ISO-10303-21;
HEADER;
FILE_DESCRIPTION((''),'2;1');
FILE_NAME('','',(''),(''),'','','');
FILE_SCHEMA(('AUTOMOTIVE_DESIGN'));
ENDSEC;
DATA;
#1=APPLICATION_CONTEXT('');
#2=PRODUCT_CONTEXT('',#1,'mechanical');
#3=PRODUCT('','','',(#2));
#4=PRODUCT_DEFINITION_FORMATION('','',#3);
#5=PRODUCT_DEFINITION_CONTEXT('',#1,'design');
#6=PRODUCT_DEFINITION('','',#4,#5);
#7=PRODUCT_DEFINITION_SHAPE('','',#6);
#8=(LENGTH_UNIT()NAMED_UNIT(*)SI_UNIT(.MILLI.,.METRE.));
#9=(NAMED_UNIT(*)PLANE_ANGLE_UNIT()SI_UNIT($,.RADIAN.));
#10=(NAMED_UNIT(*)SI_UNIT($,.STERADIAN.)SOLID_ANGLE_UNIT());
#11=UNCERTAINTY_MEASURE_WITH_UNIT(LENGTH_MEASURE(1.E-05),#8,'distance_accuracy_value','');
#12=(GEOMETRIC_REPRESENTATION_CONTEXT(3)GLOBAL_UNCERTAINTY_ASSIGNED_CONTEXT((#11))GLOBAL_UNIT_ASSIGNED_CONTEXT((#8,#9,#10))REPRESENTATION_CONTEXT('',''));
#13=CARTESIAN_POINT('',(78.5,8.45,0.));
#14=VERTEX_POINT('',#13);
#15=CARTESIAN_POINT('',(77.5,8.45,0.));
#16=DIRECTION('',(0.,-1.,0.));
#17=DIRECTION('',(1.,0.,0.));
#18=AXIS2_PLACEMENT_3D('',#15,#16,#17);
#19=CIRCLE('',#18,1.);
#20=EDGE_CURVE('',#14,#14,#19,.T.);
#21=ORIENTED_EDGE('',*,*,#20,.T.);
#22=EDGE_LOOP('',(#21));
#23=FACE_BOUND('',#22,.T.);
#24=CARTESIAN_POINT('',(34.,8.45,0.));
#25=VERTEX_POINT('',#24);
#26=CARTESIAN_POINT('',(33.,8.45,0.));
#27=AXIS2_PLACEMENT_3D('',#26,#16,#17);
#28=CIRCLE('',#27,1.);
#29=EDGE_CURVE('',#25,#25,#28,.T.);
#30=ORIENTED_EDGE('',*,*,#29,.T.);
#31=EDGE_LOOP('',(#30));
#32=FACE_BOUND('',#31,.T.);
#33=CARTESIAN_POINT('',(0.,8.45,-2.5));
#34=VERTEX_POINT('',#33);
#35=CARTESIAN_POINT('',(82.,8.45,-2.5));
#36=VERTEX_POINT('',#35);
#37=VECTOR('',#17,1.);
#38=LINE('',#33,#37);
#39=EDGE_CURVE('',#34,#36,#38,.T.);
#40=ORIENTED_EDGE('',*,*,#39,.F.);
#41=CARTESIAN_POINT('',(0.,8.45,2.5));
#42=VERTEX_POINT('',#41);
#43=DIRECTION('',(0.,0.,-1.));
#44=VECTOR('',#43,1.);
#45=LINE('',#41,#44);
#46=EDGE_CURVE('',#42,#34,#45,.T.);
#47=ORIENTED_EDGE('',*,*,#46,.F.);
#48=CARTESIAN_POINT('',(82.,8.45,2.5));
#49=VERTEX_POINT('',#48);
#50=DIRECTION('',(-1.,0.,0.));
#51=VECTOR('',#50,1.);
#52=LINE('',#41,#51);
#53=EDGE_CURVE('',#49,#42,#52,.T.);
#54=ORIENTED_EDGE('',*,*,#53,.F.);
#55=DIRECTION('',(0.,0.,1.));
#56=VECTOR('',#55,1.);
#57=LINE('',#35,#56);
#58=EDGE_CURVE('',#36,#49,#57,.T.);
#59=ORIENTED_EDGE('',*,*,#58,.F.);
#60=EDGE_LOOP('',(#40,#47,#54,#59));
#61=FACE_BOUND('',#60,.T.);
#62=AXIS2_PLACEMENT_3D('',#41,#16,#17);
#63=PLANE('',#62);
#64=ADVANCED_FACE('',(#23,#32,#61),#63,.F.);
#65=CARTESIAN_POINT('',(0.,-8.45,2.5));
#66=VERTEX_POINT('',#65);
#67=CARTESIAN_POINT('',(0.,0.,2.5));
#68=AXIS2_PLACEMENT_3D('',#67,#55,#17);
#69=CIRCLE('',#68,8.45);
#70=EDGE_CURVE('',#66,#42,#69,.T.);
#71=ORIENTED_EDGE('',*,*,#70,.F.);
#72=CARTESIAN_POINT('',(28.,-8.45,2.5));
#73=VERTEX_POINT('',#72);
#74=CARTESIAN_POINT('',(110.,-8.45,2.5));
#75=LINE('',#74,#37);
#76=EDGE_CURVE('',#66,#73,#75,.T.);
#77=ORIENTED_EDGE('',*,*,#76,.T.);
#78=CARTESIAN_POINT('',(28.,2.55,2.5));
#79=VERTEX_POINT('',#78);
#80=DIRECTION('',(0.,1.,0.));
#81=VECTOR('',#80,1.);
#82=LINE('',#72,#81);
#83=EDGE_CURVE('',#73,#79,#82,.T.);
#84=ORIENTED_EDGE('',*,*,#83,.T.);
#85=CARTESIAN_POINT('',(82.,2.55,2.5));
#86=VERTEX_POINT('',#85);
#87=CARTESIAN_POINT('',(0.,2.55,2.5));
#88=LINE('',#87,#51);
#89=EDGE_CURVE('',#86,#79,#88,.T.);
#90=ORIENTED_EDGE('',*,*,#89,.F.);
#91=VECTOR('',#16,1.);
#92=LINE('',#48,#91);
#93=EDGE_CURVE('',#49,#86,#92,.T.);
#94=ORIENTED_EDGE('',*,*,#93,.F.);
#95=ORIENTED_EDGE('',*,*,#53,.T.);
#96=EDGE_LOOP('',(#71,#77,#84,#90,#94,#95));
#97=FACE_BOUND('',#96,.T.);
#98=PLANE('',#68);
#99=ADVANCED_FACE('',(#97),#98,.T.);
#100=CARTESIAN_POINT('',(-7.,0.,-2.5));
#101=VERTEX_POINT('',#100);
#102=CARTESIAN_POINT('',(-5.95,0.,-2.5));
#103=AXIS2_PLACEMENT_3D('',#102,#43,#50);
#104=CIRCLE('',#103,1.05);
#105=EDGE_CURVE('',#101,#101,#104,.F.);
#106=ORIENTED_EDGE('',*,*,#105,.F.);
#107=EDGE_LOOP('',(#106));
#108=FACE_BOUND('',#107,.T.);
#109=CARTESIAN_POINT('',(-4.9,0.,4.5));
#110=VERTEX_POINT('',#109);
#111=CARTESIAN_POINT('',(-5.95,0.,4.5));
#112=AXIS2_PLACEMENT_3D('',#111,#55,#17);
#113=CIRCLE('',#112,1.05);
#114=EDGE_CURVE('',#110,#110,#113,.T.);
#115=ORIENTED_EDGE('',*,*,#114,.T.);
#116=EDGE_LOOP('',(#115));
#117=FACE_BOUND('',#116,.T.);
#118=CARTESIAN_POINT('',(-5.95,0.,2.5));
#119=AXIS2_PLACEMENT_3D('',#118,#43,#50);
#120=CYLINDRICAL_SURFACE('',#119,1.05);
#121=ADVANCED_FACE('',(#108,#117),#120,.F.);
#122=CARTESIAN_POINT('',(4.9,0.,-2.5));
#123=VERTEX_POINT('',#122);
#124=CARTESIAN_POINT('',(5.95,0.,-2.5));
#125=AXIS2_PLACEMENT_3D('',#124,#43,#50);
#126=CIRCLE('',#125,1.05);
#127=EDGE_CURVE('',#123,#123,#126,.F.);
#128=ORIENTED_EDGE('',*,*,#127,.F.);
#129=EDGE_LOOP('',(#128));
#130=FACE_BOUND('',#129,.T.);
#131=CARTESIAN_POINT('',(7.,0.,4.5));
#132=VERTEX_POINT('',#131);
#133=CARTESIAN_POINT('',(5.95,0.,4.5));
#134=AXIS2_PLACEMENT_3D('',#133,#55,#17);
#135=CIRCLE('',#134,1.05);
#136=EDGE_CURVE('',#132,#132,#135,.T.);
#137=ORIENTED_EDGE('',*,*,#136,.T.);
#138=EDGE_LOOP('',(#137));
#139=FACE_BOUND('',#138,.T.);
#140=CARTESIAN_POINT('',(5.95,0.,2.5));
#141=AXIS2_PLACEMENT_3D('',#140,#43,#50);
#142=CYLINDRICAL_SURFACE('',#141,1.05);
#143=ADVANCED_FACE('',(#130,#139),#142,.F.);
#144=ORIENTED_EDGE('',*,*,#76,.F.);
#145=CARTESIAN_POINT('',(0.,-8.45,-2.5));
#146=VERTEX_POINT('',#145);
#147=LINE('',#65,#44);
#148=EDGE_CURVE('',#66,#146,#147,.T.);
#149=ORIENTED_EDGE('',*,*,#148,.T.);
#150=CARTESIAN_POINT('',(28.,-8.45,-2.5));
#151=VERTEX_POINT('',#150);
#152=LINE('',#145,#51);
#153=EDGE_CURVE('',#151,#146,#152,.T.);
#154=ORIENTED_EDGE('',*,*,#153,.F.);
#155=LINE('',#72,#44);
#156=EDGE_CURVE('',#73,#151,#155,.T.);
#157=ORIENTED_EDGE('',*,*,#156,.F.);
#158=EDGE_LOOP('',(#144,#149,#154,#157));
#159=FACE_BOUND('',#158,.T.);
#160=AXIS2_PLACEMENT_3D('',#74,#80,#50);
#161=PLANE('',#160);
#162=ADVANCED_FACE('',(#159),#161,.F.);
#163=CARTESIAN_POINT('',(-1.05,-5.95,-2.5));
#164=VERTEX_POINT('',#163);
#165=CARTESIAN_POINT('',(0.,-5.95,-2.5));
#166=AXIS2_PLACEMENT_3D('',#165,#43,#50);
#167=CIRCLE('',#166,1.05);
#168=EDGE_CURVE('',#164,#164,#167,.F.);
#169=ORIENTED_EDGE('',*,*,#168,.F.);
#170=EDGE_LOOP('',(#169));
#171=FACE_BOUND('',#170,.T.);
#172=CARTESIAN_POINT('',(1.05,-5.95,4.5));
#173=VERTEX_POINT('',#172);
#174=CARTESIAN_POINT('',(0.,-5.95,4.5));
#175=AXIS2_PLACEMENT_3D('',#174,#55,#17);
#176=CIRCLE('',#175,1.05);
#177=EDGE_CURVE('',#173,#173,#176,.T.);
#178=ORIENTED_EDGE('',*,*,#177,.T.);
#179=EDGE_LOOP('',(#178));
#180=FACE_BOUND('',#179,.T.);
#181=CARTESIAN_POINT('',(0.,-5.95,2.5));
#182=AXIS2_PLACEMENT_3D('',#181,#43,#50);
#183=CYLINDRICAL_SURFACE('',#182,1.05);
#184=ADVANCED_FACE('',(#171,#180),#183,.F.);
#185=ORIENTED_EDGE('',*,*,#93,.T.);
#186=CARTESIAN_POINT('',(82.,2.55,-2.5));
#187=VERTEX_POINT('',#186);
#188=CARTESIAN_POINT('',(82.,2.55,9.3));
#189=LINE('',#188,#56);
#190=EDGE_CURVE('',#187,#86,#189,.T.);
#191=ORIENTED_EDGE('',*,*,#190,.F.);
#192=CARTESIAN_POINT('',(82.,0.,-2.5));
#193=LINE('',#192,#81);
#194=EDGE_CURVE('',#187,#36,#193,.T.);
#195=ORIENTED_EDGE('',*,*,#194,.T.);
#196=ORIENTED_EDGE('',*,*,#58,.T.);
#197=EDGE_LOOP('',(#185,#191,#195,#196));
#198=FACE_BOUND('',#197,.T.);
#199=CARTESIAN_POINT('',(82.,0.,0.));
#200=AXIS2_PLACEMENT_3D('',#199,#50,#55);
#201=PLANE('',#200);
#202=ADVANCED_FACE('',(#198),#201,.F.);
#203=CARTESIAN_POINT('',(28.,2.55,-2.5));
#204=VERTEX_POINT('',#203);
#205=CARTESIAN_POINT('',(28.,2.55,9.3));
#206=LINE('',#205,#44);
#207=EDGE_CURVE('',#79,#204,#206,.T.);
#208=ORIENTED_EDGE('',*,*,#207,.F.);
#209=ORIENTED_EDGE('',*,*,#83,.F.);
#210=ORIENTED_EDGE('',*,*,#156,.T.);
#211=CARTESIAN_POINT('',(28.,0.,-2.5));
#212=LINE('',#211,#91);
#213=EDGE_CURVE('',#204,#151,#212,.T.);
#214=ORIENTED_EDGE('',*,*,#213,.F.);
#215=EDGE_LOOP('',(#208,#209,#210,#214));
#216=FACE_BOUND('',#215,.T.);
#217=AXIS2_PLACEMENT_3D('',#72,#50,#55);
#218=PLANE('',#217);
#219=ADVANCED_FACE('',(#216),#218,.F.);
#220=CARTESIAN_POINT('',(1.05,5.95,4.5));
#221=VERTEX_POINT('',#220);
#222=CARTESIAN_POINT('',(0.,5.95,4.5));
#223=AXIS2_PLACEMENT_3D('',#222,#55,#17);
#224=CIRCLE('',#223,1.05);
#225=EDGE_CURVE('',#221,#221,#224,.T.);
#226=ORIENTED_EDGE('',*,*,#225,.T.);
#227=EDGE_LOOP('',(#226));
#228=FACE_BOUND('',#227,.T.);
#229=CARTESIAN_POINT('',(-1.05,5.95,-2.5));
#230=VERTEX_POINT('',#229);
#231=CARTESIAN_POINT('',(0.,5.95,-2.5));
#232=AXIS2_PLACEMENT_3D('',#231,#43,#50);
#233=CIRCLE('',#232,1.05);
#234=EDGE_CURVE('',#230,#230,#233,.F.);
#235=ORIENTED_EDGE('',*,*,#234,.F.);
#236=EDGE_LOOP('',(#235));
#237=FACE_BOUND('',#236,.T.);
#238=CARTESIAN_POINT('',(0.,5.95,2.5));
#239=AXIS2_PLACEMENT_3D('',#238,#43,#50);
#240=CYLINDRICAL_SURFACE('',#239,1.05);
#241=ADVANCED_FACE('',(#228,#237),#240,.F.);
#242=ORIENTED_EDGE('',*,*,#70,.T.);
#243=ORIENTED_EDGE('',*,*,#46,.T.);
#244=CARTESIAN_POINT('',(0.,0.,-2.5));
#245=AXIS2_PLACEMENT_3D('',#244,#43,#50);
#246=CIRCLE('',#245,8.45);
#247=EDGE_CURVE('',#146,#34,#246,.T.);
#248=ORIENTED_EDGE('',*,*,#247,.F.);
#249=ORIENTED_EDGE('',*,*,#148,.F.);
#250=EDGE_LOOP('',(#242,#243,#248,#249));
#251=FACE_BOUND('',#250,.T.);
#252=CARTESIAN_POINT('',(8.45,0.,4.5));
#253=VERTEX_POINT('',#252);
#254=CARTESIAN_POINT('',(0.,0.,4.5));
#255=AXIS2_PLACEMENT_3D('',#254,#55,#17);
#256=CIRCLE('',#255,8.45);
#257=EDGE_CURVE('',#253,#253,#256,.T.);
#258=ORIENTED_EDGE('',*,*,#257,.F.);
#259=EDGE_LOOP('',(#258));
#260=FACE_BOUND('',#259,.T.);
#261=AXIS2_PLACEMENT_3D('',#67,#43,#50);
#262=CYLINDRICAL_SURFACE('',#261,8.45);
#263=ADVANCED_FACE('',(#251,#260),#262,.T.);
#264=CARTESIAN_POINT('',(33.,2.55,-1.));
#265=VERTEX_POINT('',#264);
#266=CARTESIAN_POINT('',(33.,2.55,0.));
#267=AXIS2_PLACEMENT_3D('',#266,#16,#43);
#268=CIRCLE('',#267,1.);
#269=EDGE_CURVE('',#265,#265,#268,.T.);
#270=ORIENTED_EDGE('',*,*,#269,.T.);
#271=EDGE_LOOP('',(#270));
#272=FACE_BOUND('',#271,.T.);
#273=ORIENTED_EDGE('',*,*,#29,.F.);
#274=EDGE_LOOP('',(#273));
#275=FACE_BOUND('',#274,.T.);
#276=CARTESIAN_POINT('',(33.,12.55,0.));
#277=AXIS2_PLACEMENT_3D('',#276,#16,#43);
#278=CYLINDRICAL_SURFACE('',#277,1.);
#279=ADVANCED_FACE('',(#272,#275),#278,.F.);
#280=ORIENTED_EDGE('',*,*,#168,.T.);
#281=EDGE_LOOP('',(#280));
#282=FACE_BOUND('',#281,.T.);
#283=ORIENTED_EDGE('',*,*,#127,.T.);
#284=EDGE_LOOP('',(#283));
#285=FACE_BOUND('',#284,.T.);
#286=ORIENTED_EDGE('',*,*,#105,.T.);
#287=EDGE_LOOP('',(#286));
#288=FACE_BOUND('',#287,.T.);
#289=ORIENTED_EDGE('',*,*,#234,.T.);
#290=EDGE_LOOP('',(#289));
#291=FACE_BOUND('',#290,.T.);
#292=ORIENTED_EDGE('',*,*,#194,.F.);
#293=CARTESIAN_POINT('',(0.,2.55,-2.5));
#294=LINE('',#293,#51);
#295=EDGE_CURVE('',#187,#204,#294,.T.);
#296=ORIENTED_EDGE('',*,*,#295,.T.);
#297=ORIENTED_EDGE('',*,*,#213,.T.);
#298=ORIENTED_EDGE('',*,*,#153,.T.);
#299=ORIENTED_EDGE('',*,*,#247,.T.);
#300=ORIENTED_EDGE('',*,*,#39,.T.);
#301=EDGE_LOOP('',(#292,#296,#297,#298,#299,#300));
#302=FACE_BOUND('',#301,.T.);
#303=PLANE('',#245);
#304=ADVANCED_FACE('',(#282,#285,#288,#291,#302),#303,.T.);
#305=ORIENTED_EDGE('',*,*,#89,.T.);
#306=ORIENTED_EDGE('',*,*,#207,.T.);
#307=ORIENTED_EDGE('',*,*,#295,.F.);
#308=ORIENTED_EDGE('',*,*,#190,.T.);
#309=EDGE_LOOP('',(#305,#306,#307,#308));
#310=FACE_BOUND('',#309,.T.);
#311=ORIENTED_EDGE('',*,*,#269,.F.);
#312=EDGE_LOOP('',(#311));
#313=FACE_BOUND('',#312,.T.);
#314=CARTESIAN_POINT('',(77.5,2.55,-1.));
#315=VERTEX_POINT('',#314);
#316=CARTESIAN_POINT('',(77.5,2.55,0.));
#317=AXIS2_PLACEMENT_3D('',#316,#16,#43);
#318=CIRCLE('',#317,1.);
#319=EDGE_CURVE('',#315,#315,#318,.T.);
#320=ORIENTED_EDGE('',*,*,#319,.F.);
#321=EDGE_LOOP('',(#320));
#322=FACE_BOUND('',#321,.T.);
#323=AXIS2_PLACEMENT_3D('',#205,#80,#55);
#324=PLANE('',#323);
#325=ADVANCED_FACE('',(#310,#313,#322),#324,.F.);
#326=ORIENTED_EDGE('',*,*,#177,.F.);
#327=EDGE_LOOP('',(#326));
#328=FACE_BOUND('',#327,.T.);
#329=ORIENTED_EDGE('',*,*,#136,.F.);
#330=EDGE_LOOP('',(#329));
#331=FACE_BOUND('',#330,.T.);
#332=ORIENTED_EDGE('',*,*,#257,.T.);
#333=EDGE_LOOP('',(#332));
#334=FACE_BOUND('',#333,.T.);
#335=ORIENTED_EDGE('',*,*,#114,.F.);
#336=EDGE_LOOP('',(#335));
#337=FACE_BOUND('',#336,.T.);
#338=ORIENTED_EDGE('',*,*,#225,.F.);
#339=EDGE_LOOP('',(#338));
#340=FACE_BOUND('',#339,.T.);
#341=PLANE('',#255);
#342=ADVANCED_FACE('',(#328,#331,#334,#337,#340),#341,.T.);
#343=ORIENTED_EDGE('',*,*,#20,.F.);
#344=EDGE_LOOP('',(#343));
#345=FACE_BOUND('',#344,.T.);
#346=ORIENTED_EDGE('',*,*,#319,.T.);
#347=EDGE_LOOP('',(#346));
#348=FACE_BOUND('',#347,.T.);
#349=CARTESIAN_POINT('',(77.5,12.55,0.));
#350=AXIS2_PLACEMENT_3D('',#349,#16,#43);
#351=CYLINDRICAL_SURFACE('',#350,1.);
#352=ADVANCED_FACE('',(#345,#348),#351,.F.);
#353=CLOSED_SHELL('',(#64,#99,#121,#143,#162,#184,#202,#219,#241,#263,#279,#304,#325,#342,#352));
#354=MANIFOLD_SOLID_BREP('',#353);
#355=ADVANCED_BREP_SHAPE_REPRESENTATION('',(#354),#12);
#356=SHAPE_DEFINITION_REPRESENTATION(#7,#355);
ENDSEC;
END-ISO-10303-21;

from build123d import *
from build123d.topology import SkipClean

# Parameters (mm, degrees)
SKETCH_1_R          = 1.05
EXTRUDE_1_DEPTH     = 2.5
SKETCH_2_W          = 82
SKETCH_2_H          = 7
CUT_EXTRUDE_1_DEPTH = 2.5
SKETCH_3_W          = 79
SKETCH_3_H          = 4
EXTRUDE_2_DEPTH     = 10.7
SKETCH_4_W          = 0.401921616
SKETCH_4_H          = 13.2
EXTRUDE_3_DEPTH     = 0.6
SKETCH_5_W          = 6.198078384
SKETCH_5_H          = 0.4
EXTRUDE_4_DEPTH     = 0.4
SKETCH_6_W          = 79
SKETCH_6_H          = 6.717043916
CUT_EXTRUDE_2_DEPTH = 20
EXTRUDE_START       = 2.5
SKETCH_7_R          = 1.05
EXTRUDE_5_DEPTH     = 2.5
SKETCH_9_R          = 1
CUT_EXTRUDE_3_DEPTH = 10
SKETCH_10_R         = 1
CUT_EXTRUDE_4_DEPTH = 10
SKETCH_11_W         = 5
SKETCH_11_H         = 9.9
CUT_EXTRUDE_5_DEPTH = 28
SKETCH_13_R         = 8.45
SKETCH_13_R_2       = 1.05
EXTRUDE_7_DEPTH     = 2


with BuildPart() as part:
    # 스케치1 → 보스-돌출1 (new body)
    with BuildSketch(Plane.XY):
        with BuildLine():
            Line((0, 8.45), (110, 8.45))
            Line((110, 8.45), (110, -8.45))
            Line((110, -8.45), (0, -8.45))
            ThreePointArc((0, -8.45), (-8.45, 0), (0, 8.45))
        make_face()
        with Locations((-5.95, 0)):
            Circle(SKETCH_1_R, mode=Mode.SUBTRACT)
        with Locations((0, 5.95)):
            Circle(SKETCH_1_R, mode=Mode.SUBTRACT)
        with Locations((5.95, 0)):
            Circle(SKETCH_1_R, mode=Mode.SUBTRACT)
        with Locations((0, -5.95)):
            Circle(SKETCH_1_R, mode=Mode.SUBTRACT)
    extrude(amount=EXTRUDE_1_DEPTH)

    # 스케치2 → 컷-돌출1 (cut)
    with BuildSketch(Plane(origin=(0, 0, 0), x_dir=(-1, 0, 0), z_dir=(0, 0, -1))):
        with Locations((-69, -4.95)):
            Rectangle(SKETCH_2_W, SKETCH_2_H)
    extrude(amount=-CUT_EXTRUDE_1_DEPTH, mode=Mode.SUBTRACT)

    # 스케치3 → 보스-돌출2 (add)
    with BuildSketch(Plane(origin=(0, 0, 0), x_dir=(-1, 0, 0), z_dir=(0, 0, -1))):
        with Locations((-67.5, 0.55)):
            Rectangle(SKETCH_3_W, SKETCH_3_H)
    extrude(amount=EXTRUDE_2_DEPTH)

    # 스케치4 → 보스-돌출3 (add)
    with BuildSketch(Plane.XZ.offset(1.45)):
        with Locations((74.1, -4.1)):
            Rectangle(SKETCH_4_W, SKETCH_4_H)
        with Locations((67.5, -4.1)):
            Rectangle(SKETCH_4_W, SKETCH_4_H)
        with Locations((80.7, -4.1)):
            Rectangle(SKETCH_4_W, SKETCH_4_H)
        with Locations((87.3, -4.1)):
            Rectangle(SKETCH_4_W, SKETCH_4_H)
        with Locations((93.9, -4.1)):
            Rectangle(SKETCH_4_W, SKETCH_4_H)
    extrude(amount=EXTRUDE_3_DEPTH)

    # 스케치5 → 보스-돌출4 (add)
    with BuildSketch(Plane.XZ.offset(1.45)):
        with Locations((70.8, 0.95)):
            Rectangle(SKETCH_5_W, SKETCH_5_H)
        with Locations((70.8, -9.15)):
            Rectangle(SKETCH_5_W, SKETCH_5_H)
        with Locations((77.4, 0.95)):
            Rectangle(SKETCH_5_W, SKETCH_5_H)
        with Locations((77.4, -9.15)):
            Rectangle(SKETCH_5_W, SKETCH_5_H)
        with Locations((84, 0.95)):
            Rectangle(SKETCH_5_W, SKETCH_5_H)
        with Locations((84, -9.15)):
            Rectangle(SKETCH_5_W, SKETCH_5_H)
        with Locations((90.6, 0.95)):
            Rectangle(SKETCH_5_W, SKETCH_5_H)
        with Locations((90.6, -9.15)):
            Rectangle(SKETCH_5_W, SKETCH_5_H)
    extrude(amount=EXTRUDE_4_DEPTH)

    # 스케치6 → 컷-돌출2 (cut)
    with BuildSketch(Plane(origin=(0, 0, -10.7), x_dir=(-1, 0, 0), z_dir=(0, 0, -1))):
        with Locations((-67.5, -0.808521958)):
            Rectangle(SKETCH_6_W, SKETCH_6_H)
    extrude(amount=-CUT_EXTRUDE_2_DEPTH, mode=Mode.SUBTRACT)

    # 스케치7 → 보스-돌출5 (add)
    with SkipClean():  # the faces are left unmerged after this step: merging them gives an invalid solid
        with BuildSketch(Plane(origin=(0, 0, 0), x_dir=(-1, 0, 0), z_dir=(0, 0, -1)).offset(EXTRUDE_START)):
            with BuildLine():
                Line((-110, -1.45), (-107, -1.45))
                Line((-107, -1.45), (-107, 2.55))
                Line((-107, 2.55), (-28, 2.55))
                Line((-28, 2.55), (-28, -8.45))
                Line((-28, -8.45), (0, -8.45))
                ThreePointArc((0, -8.45), (8.402739403, -0.892451973), (1.774921032, 8.261486266))
                ThreePointArc((1.774921032, 8.261486266), (0.892451973, 8.402739403), (0, 8.45))
                Line((0, 8.45), (-110, 8.45))
                Line((-110, 8.45), (-110, -1.45))
            make_face()
            with Locations((0, -5.95)):
                Circle(SKETCH_7_R, mode=Mode.SUBTRACT)
            with Locations((-5.95, 0)):
                Circle(SKETCH_7_R, mode=Mode.SUBTRACT)
            with Locations((5.95, 0)):
                Circle(SKETCH_7_R, mode=Mode.SUBTRACT)
            with Locations((0, 5.95)):
                Circle(SKETCH_7_R, mode=Mode.SUBTRACT)
        extrude(amount=-EXTRUDE_5_DEPTH)

    # 스케치9 → 컷-돌출3 (cut)
    with SkipClean():  # the faces are left unmerged after this step: merging them gives an invalid solid
        with BuildSketch(Plane.XZ.offset(-2.55)):
            with Locations((102, 0)):
                Circle(SKETCH_9_R)
            with Locations((33, 0)):
                Circle(SKETCH_9_R)
        extrude(amount=-CUT_EXTRUDE_3_DEPTH, mode=Mode.SUBTRACT)

    # 스케치10 → 컷-돌출4 (cut)
    with SkipClean():  # the faces are left unmerged after this step: merging them gives an invalid solid
        with BuildSketch(Plane.XZ.offset(-2.55)):
            with Locations((77.5, 0)):
                Circle(SKETCH_10_R)
        extrude(amount=-CUT_EXTRUDE_4_DEPTH, mode=Mode.SUBTRACT)

    # 스케치11 → 컷-돌출5 (cut)
    with SkipClean():  # the faces are left unmerged after this step: merging them gives an invalid solid
        with BuildSketch(Plane(origin=(110, 0, 0), x_dir=(0, 0, -1), z_dir=(1, 0, 0))):
            with Locations((0, 3.5)):
                Rectangle(SKETCH_11_W, SKETCH_11_H)
        extrude(amount=-CUT_EXTRUDE_5_DEPTH, mode=Mode.SUBTRACT)

    # 스케치13 → 보스-돌출7 (add)
    with BuildSketch(Plane.XY.offset(2.5)):
        Circle(SKETCH_13_R)
        with Locations((0, -5.95)):
            Circle(SKETCH_13_R_2, mode=Mode.SUBTRACT)
        with Locations((5.95, 0)):
            Circle(SKETCH_13_R_2, mode=Mode.SUBTRACT)
        with Locations((0, 5.95)):
            Circle(SKETCH_13_R_2, mode=Mode.SUBTRACT)
        with Locations((-5.95, 0)):
            Circle(SKETCH_13_R_2, mode=Mode.SUBTRACT)
    extrude(amount=EXTRUDE_7_DEPTH)


solid = part.part
